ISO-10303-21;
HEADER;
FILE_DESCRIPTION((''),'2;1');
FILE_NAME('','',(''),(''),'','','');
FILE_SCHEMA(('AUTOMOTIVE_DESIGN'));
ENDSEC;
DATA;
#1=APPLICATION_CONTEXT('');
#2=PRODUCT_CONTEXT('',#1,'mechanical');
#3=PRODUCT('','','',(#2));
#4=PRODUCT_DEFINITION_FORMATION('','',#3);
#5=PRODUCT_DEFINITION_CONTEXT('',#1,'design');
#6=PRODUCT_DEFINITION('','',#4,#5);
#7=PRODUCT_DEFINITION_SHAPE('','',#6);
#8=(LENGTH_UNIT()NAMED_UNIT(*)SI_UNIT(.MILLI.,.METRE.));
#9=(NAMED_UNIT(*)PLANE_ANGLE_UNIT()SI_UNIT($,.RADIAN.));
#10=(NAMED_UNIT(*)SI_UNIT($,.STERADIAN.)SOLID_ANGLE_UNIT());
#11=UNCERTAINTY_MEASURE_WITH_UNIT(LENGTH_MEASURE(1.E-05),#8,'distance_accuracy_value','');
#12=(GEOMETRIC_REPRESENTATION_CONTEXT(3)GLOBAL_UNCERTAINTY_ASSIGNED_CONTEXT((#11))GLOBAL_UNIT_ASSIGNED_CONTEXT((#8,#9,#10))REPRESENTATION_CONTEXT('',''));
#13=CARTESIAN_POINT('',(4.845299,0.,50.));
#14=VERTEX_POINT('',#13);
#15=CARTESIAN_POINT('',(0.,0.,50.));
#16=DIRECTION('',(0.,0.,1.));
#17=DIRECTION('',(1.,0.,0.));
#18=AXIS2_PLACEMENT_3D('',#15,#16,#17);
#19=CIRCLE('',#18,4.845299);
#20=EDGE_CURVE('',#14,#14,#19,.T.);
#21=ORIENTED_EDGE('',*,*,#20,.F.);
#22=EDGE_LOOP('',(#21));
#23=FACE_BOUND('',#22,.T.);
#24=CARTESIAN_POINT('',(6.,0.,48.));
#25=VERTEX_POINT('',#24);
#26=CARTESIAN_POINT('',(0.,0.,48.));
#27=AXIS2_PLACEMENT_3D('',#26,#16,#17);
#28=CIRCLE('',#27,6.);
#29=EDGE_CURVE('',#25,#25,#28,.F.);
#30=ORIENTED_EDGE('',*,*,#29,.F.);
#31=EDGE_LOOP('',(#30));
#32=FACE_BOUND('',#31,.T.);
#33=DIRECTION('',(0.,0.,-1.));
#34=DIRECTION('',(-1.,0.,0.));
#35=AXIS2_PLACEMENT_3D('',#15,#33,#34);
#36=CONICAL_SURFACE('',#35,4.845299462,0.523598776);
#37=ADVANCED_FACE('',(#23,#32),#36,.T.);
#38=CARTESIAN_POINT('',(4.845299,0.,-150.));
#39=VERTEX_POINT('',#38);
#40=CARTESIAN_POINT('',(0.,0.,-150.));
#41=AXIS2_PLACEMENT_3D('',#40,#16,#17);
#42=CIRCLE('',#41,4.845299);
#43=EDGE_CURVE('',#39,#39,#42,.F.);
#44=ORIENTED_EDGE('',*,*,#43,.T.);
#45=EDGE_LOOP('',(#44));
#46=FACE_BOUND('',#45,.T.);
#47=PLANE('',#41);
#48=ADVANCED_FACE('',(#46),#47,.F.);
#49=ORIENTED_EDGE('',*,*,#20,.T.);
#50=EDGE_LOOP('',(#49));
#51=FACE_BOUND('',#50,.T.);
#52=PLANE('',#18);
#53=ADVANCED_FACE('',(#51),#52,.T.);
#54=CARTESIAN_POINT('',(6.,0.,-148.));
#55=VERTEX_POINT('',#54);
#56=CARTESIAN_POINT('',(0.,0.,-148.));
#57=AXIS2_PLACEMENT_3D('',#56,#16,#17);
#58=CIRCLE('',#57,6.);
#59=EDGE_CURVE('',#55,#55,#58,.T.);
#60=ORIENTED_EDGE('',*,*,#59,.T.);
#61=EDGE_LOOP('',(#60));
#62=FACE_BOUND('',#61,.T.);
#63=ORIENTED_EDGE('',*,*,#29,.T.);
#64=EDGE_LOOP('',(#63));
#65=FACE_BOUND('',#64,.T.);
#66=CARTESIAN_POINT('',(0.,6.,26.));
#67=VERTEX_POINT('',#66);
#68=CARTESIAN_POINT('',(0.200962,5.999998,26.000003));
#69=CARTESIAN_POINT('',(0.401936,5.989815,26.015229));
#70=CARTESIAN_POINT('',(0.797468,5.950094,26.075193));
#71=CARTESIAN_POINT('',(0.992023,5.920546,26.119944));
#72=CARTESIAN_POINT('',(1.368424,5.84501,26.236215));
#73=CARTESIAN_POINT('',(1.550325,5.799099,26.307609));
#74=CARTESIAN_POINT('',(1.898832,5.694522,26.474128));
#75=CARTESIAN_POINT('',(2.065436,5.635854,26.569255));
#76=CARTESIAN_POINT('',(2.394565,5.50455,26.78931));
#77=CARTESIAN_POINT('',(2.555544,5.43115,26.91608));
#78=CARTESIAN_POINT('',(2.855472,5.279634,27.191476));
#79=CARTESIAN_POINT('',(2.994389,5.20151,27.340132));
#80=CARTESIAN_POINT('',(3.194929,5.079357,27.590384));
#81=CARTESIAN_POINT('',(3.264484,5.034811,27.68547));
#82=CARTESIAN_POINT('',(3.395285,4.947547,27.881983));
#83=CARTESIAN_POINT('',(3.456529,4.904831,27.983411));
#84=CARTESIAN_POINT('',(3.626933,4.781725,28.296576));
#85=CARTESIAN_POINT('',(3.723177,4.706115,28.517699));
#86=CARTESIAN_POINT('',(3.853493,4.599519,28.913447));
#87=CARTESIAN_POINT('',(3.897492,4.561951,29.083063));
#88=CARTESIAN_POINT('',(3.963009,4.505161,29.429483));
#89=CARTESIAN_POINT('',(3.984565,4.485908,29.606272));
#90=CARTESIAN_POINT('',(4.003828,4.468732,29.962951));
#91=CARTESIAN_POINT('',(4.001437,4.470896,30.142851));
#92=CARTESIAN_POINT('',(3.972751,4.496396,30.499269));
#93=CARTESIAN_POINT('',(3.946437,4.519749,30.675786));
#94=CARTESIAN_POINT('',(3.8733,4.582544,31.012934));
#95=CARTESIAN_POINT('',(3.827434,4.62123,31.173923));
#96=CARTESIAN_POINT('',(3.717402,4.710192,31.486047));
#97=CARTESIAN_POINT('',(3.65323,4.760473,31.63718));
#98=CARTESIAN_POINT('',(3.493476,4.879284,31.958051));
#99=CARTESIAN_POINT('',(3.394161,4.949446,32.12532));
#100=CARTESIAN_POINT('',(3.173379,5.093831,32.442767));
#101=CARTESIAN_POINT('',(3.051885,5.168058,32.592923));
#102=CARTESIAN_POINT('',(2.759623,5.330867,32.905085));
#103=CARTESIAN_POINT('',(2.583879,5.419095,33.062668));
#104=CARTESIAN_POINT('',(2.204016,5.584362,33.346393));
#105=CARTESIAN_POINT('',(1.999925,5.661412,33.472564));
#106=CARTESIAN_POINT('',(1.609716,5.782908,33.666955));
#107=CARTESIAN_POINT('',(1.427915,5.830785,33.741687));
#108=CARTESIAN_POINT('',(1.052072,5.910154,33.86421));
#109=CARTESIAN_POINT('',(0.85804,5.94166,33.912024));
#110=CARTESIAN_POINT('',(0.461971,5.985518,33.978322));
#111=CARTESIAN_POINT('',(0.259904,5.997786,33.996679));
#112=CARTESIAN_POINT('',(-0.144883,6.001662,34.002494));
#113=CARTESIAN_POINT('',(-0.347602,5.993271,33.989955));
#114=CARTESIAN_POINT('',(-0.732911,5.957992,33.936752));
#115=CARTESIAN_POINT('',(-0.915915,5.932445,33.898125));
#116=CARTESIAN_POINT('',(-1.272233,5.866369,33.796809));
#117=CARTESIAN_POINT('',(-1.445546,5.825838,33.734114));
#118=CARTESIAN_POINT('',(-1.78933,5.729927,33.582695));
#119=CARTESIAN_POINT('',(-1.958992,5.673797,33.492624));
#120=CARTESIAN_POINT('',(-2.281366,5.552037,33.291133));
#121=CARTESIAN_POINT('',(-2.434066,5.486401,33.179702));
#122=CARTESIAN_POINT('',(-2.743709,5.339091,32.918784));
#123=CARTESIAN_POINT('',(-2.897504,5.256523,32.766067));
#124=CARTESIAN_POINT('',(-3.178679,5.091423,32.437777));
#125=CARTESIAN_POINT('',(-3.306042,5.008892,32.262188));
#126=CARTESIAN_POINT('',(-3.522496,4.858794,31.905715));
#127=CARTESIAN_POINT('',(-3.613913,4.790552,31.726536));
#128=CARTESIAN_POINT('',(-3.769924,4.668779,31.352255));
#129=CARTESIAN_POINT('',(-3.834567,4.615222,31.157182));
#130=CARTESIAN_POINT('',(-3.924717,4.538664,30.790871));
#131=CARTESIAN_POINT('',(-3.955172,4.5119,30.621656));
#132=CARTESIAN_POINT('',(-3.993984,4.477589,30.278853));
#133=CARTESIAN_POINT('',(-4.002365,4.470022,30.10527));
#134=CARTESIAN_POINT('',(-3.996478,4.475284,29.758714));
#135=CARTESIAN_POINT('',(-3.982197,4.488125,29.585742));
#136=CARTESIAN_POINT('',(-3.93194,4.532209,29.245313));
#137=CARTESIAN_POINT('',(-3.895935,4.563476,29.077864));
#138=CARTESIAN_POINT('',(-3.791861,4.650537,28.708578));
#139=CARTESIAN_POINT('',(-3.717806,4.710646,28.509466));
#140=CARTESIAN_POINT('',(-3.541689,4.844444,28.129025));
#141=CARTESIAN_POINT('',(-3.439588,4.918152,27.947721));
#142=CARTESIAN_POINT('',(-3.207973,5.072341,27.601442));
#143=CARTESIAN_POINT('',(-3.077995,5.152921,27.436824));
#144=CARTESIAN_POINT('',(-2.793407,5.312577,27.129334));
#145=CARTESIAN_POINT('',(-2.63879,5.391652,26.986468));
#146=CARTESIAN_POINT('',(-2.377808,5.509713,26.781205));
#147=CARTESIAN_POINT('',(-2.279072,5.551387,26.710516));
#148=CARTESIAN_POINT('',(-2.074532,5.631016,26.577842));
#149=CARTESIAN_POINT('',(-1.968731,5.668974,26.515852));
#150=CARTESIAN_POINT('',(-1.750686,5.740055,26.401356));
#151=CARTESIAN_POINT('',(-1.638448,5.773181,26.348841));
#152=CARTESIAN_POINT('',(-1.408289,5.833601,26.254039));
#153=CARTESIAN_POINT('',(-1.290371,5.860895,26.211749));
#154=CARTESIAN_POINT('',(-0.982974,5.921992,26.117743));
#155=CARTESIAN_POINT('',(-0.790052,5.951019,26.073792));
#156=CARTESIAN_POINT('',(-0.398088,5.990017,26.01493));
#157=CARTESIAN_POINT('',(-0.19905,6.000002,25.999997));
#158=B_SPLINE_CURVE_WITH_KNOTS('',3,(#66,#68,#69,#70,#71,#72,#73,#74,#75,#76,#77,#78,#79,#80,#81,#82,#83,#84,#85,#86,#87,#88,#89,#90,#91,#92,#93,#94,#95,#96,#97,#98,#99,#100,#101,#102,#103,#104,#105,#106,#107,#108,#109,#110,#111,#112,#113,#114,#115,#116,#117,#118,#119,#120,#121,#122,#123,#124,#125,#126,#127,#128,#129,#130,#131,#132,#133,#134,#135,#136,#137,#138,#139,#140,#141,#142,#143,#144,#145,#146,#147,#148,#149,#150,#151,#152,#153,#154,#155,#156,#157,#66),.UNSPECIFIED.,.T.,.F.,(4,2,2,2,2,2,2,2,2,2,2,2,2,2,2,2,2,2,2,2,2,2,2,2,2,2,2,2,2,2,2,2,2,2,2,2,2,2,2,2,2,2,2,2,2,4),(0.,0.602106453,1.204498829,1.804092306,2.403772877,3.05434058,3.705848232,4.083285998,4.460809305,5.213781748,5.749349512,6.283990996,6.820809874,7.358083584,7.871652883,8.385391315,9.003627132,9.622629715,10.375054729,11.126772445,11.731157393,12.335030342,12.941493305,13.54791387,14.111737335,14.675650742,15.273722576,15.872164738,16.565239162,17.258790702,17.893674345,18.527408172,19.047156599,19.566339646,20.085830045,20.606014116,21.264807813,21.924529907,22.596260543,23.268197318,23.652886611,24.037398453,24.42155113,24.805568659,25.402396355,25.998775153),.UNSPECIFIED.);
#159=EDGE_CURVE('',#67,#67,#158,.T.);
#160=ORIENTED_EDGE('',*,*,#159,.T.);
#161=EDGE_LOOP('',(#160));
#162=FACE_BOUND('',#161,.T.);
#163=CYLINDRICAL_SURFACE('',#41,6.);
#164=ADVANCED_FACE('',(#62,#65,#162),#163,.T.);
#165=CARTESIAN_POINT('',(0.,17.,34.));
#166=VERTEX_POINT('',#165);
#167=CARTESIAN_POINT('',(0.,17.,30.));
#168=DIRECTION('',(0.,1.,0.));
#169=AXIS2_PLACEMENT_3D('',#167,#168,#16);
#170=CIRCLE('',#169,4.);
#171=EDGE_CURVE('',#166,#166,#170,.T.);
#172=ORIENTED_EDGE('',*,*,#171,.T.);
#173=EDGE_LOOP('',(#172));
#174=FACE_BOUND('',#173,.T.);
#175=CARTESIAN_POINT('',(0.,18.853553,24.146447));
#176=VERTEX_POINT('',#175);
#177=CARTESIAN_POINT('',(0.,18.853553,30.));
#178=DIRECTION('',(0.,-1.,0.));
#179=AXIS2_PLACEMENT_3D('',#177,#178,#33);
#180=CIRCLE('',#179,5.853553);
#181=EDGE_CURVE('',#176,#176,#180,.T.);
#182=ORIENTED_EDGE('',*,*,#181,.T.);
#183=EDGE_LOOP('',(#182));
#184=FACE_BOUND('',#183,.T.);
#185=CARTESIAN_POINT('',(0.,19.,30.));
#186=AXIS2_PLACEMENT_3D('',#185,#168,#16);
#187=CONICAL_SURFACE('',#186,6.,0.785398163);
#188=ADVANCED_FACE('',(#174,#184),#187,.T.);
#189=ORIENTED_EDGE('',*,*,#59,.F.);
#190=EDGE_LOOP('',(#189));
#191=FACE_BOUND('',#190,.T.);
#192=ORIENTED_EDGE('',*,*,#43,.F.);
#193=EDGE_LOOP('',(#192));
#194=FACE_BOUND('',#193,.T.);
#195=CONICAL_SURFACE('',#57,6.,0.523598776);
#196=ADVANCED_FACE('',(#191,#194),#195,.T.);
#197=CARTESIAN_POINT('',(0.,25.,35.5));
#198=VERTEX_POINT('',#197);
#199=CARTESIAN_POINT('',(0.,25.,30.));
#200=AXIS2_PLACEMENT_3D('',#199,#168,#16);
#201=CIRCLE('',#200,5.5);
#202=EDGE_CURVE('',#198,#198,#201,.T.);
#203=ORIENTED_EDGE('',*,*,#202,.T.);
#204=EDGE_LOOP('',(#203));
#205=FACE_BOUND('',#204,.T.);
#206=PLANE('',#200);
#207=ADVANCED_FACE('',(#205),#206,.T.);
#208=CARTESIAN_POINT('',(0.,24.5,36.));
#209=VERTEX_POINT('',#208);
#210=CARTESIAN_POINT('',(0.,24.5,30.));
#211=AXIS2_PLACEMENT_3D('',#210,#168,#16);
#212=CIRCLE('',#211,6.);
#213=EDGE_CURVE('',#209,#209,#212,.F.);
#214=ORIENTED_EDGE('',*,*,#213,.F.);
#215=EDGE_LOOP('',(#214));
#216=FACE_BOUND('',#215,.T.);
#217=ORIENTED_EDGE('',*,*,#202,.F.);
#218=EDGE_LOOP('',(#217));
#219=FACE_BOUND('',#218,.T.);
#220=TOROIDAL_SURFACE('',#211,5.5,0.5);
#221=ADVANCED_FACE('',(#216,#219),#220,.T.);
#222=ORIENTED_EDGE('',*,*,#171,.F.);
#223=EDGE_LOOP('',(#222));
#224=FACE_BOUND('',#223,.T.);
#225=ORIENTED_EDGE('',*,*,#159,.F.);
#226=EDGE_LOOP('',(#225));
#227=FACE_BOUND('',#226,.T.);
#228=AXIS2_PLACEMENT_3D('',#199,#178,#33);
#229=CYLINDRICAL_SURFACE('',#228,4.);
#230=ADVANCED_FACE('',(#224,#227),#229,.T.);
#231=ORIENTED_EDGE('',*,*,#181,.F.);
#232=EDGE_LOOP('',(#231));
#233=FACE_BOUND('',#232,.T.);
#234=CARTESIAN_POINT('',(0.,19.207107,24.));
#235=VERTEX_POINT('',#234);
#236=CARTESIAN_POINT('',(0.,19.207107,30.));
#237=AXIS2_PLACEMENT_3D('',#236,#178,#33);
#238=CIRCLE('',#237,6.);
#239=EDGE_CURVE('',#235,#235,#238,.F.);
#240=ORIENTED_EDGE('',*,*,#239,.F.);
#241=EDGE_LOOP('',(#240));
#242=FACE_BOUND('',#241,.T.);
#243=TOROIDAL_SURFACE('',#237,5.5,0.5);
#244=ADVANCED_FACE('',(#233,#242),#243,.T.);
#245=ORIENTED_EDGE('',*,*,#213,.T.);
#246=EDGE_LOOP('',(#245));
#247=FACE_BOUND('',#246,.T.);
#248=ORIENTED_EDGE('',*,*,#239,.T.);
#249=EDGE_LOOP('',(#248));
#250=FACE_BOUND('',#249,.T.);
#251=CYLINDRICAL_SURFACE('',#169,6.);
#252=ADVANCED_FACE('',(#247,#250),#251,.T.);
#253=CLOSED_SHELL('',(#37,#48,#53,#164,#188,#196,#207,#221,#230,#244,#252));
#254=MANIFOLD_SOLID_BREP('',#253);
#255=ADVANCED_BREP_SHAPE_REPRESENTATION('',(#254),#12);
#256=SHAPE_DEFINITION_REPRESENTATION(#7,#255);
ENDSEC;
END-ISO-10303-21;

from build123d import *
from OCP.BRepFilletAPI import BRepFilletAPI_MakeChamfer

# Parameters (mm, degrees)
BOSS_EXTRUDE1_DEPTH      = 50
BOSS_EXTRUDE1_DEPTH_BACK = 150
SKETCH1_R                = 6
SKETCH2_R                = 4
BOSS_EXTRUDE2_DEPTH      = 25
SKETCH3_R                = 6
BOSS_EXTRUDE3_DEPTH      = 8
CHAMFER1_SIZE            = 2
CHAMFER1_SIZE2           = 1.154700538
CHAMFER2_SIZE            = 2
FILLET1_R                = 0.5


with BuildPart() as part:
    # Sketch1 → Boss-Extrude1 (new, two sides: drawn at the far end of the back side and taken through both)
    with BuildSketch(Plane.XY.offset(-BOSS_EXTRUDE1_DEPTH_BACK)):
        Circle(SKETCH1_R)
    extrude(amount=BOSS_EXTRUDE1_DEPTH + BOSS_EXTRUDE1_DEPTH_BACK)

    # Sketch2 → Boss-Extrude2 (add)
    with BuildSketch(Plane(origin=(0, 0, 0), x_dir=(1, 0, 0), z_dir=(0, 1, 0))):
        with Locations(Location((0, -30, 0), (0, 0, 90))):
            Circle(SKETCH2_R)
    extrude(amount=BOSS_EXTRUDE2_DEPTH)

    # Sketch3 → Boss-Extrude3 (add)
    with BuildSketch(Plane(origin=(0, 25, 0), x_dir=(1, 0, 0), z_dir=(0, 1, 0))):
        with Locations(Location((0, -30, 0), (0, 0, 270))):
            Circle(SKETCH3_R)
    extrude(amount=-BOSS_EXTRUDE3_DEPTH)

    # Chamfer1: one chamfer whose edges measure the first distance from different faces: ONE call of the kernel's chamfer builder (chamfer() names one face for all edges)
    chamfer1_edges_1 = [part.edges().sort_by_distance(p)[0] for p in [
        (-6, 0, 50),
    ]]
    chamfer1_side_1 = [part.faces().sort_by_distance(p)[0] for p in [
        (-6, 0, 25),
    ]]
    chamfer1_edges_2 = [part.edges().sort_by_distance(p)[0] for p in [
        (-6, 0, -150),
    ]]
    chamfer1_side_2 = [part.faces().sort_by_distance(p)[0] for p in [
        (-6, 0, -75),
    ]]
    chamfer1 = BRepFilletAPI_MakeChamfer(part.part.solid().wrapped)
    for e in chamfer1_edges_1:
        chamfer1.Add(CHAMFER1_SIZE, CHAMFER1_SIZE2, e.wrapped, chamfer1_side_1[0].wrapped)  # the first distance lies on this face
    for e in chamfer1_edges_2:
        chamfer1.Add(CHAMFER1_SIZE, CHAMFER1_SIZE2, e.wrapped, chamfer1_side_2[0].wrapped)  # the first distance lies on this face
    add(Compound.cast(chamfer1.Shape()), mode=Mode.REPLACE)

    # Chamfer2
    chamfer2_edges = [part.edges().sort_by_distance(p)[0] for p in [
        (0, 17, 24),
    ]]
    chamfer(chamfer2_edges, length=CHAMFER2_SIZE - 0.0001)  # a hair under: the kernel refuses the full size

    # Fillet1
    fillet1_edges = [part.edges().sort_by_distance(p)[0] for p in [
        (0, 18.9999, 24),
        (0, 25, 24),
    ]]
    fillet(fillet1_edges, radius=FILLET1_R)


solid = part.part
